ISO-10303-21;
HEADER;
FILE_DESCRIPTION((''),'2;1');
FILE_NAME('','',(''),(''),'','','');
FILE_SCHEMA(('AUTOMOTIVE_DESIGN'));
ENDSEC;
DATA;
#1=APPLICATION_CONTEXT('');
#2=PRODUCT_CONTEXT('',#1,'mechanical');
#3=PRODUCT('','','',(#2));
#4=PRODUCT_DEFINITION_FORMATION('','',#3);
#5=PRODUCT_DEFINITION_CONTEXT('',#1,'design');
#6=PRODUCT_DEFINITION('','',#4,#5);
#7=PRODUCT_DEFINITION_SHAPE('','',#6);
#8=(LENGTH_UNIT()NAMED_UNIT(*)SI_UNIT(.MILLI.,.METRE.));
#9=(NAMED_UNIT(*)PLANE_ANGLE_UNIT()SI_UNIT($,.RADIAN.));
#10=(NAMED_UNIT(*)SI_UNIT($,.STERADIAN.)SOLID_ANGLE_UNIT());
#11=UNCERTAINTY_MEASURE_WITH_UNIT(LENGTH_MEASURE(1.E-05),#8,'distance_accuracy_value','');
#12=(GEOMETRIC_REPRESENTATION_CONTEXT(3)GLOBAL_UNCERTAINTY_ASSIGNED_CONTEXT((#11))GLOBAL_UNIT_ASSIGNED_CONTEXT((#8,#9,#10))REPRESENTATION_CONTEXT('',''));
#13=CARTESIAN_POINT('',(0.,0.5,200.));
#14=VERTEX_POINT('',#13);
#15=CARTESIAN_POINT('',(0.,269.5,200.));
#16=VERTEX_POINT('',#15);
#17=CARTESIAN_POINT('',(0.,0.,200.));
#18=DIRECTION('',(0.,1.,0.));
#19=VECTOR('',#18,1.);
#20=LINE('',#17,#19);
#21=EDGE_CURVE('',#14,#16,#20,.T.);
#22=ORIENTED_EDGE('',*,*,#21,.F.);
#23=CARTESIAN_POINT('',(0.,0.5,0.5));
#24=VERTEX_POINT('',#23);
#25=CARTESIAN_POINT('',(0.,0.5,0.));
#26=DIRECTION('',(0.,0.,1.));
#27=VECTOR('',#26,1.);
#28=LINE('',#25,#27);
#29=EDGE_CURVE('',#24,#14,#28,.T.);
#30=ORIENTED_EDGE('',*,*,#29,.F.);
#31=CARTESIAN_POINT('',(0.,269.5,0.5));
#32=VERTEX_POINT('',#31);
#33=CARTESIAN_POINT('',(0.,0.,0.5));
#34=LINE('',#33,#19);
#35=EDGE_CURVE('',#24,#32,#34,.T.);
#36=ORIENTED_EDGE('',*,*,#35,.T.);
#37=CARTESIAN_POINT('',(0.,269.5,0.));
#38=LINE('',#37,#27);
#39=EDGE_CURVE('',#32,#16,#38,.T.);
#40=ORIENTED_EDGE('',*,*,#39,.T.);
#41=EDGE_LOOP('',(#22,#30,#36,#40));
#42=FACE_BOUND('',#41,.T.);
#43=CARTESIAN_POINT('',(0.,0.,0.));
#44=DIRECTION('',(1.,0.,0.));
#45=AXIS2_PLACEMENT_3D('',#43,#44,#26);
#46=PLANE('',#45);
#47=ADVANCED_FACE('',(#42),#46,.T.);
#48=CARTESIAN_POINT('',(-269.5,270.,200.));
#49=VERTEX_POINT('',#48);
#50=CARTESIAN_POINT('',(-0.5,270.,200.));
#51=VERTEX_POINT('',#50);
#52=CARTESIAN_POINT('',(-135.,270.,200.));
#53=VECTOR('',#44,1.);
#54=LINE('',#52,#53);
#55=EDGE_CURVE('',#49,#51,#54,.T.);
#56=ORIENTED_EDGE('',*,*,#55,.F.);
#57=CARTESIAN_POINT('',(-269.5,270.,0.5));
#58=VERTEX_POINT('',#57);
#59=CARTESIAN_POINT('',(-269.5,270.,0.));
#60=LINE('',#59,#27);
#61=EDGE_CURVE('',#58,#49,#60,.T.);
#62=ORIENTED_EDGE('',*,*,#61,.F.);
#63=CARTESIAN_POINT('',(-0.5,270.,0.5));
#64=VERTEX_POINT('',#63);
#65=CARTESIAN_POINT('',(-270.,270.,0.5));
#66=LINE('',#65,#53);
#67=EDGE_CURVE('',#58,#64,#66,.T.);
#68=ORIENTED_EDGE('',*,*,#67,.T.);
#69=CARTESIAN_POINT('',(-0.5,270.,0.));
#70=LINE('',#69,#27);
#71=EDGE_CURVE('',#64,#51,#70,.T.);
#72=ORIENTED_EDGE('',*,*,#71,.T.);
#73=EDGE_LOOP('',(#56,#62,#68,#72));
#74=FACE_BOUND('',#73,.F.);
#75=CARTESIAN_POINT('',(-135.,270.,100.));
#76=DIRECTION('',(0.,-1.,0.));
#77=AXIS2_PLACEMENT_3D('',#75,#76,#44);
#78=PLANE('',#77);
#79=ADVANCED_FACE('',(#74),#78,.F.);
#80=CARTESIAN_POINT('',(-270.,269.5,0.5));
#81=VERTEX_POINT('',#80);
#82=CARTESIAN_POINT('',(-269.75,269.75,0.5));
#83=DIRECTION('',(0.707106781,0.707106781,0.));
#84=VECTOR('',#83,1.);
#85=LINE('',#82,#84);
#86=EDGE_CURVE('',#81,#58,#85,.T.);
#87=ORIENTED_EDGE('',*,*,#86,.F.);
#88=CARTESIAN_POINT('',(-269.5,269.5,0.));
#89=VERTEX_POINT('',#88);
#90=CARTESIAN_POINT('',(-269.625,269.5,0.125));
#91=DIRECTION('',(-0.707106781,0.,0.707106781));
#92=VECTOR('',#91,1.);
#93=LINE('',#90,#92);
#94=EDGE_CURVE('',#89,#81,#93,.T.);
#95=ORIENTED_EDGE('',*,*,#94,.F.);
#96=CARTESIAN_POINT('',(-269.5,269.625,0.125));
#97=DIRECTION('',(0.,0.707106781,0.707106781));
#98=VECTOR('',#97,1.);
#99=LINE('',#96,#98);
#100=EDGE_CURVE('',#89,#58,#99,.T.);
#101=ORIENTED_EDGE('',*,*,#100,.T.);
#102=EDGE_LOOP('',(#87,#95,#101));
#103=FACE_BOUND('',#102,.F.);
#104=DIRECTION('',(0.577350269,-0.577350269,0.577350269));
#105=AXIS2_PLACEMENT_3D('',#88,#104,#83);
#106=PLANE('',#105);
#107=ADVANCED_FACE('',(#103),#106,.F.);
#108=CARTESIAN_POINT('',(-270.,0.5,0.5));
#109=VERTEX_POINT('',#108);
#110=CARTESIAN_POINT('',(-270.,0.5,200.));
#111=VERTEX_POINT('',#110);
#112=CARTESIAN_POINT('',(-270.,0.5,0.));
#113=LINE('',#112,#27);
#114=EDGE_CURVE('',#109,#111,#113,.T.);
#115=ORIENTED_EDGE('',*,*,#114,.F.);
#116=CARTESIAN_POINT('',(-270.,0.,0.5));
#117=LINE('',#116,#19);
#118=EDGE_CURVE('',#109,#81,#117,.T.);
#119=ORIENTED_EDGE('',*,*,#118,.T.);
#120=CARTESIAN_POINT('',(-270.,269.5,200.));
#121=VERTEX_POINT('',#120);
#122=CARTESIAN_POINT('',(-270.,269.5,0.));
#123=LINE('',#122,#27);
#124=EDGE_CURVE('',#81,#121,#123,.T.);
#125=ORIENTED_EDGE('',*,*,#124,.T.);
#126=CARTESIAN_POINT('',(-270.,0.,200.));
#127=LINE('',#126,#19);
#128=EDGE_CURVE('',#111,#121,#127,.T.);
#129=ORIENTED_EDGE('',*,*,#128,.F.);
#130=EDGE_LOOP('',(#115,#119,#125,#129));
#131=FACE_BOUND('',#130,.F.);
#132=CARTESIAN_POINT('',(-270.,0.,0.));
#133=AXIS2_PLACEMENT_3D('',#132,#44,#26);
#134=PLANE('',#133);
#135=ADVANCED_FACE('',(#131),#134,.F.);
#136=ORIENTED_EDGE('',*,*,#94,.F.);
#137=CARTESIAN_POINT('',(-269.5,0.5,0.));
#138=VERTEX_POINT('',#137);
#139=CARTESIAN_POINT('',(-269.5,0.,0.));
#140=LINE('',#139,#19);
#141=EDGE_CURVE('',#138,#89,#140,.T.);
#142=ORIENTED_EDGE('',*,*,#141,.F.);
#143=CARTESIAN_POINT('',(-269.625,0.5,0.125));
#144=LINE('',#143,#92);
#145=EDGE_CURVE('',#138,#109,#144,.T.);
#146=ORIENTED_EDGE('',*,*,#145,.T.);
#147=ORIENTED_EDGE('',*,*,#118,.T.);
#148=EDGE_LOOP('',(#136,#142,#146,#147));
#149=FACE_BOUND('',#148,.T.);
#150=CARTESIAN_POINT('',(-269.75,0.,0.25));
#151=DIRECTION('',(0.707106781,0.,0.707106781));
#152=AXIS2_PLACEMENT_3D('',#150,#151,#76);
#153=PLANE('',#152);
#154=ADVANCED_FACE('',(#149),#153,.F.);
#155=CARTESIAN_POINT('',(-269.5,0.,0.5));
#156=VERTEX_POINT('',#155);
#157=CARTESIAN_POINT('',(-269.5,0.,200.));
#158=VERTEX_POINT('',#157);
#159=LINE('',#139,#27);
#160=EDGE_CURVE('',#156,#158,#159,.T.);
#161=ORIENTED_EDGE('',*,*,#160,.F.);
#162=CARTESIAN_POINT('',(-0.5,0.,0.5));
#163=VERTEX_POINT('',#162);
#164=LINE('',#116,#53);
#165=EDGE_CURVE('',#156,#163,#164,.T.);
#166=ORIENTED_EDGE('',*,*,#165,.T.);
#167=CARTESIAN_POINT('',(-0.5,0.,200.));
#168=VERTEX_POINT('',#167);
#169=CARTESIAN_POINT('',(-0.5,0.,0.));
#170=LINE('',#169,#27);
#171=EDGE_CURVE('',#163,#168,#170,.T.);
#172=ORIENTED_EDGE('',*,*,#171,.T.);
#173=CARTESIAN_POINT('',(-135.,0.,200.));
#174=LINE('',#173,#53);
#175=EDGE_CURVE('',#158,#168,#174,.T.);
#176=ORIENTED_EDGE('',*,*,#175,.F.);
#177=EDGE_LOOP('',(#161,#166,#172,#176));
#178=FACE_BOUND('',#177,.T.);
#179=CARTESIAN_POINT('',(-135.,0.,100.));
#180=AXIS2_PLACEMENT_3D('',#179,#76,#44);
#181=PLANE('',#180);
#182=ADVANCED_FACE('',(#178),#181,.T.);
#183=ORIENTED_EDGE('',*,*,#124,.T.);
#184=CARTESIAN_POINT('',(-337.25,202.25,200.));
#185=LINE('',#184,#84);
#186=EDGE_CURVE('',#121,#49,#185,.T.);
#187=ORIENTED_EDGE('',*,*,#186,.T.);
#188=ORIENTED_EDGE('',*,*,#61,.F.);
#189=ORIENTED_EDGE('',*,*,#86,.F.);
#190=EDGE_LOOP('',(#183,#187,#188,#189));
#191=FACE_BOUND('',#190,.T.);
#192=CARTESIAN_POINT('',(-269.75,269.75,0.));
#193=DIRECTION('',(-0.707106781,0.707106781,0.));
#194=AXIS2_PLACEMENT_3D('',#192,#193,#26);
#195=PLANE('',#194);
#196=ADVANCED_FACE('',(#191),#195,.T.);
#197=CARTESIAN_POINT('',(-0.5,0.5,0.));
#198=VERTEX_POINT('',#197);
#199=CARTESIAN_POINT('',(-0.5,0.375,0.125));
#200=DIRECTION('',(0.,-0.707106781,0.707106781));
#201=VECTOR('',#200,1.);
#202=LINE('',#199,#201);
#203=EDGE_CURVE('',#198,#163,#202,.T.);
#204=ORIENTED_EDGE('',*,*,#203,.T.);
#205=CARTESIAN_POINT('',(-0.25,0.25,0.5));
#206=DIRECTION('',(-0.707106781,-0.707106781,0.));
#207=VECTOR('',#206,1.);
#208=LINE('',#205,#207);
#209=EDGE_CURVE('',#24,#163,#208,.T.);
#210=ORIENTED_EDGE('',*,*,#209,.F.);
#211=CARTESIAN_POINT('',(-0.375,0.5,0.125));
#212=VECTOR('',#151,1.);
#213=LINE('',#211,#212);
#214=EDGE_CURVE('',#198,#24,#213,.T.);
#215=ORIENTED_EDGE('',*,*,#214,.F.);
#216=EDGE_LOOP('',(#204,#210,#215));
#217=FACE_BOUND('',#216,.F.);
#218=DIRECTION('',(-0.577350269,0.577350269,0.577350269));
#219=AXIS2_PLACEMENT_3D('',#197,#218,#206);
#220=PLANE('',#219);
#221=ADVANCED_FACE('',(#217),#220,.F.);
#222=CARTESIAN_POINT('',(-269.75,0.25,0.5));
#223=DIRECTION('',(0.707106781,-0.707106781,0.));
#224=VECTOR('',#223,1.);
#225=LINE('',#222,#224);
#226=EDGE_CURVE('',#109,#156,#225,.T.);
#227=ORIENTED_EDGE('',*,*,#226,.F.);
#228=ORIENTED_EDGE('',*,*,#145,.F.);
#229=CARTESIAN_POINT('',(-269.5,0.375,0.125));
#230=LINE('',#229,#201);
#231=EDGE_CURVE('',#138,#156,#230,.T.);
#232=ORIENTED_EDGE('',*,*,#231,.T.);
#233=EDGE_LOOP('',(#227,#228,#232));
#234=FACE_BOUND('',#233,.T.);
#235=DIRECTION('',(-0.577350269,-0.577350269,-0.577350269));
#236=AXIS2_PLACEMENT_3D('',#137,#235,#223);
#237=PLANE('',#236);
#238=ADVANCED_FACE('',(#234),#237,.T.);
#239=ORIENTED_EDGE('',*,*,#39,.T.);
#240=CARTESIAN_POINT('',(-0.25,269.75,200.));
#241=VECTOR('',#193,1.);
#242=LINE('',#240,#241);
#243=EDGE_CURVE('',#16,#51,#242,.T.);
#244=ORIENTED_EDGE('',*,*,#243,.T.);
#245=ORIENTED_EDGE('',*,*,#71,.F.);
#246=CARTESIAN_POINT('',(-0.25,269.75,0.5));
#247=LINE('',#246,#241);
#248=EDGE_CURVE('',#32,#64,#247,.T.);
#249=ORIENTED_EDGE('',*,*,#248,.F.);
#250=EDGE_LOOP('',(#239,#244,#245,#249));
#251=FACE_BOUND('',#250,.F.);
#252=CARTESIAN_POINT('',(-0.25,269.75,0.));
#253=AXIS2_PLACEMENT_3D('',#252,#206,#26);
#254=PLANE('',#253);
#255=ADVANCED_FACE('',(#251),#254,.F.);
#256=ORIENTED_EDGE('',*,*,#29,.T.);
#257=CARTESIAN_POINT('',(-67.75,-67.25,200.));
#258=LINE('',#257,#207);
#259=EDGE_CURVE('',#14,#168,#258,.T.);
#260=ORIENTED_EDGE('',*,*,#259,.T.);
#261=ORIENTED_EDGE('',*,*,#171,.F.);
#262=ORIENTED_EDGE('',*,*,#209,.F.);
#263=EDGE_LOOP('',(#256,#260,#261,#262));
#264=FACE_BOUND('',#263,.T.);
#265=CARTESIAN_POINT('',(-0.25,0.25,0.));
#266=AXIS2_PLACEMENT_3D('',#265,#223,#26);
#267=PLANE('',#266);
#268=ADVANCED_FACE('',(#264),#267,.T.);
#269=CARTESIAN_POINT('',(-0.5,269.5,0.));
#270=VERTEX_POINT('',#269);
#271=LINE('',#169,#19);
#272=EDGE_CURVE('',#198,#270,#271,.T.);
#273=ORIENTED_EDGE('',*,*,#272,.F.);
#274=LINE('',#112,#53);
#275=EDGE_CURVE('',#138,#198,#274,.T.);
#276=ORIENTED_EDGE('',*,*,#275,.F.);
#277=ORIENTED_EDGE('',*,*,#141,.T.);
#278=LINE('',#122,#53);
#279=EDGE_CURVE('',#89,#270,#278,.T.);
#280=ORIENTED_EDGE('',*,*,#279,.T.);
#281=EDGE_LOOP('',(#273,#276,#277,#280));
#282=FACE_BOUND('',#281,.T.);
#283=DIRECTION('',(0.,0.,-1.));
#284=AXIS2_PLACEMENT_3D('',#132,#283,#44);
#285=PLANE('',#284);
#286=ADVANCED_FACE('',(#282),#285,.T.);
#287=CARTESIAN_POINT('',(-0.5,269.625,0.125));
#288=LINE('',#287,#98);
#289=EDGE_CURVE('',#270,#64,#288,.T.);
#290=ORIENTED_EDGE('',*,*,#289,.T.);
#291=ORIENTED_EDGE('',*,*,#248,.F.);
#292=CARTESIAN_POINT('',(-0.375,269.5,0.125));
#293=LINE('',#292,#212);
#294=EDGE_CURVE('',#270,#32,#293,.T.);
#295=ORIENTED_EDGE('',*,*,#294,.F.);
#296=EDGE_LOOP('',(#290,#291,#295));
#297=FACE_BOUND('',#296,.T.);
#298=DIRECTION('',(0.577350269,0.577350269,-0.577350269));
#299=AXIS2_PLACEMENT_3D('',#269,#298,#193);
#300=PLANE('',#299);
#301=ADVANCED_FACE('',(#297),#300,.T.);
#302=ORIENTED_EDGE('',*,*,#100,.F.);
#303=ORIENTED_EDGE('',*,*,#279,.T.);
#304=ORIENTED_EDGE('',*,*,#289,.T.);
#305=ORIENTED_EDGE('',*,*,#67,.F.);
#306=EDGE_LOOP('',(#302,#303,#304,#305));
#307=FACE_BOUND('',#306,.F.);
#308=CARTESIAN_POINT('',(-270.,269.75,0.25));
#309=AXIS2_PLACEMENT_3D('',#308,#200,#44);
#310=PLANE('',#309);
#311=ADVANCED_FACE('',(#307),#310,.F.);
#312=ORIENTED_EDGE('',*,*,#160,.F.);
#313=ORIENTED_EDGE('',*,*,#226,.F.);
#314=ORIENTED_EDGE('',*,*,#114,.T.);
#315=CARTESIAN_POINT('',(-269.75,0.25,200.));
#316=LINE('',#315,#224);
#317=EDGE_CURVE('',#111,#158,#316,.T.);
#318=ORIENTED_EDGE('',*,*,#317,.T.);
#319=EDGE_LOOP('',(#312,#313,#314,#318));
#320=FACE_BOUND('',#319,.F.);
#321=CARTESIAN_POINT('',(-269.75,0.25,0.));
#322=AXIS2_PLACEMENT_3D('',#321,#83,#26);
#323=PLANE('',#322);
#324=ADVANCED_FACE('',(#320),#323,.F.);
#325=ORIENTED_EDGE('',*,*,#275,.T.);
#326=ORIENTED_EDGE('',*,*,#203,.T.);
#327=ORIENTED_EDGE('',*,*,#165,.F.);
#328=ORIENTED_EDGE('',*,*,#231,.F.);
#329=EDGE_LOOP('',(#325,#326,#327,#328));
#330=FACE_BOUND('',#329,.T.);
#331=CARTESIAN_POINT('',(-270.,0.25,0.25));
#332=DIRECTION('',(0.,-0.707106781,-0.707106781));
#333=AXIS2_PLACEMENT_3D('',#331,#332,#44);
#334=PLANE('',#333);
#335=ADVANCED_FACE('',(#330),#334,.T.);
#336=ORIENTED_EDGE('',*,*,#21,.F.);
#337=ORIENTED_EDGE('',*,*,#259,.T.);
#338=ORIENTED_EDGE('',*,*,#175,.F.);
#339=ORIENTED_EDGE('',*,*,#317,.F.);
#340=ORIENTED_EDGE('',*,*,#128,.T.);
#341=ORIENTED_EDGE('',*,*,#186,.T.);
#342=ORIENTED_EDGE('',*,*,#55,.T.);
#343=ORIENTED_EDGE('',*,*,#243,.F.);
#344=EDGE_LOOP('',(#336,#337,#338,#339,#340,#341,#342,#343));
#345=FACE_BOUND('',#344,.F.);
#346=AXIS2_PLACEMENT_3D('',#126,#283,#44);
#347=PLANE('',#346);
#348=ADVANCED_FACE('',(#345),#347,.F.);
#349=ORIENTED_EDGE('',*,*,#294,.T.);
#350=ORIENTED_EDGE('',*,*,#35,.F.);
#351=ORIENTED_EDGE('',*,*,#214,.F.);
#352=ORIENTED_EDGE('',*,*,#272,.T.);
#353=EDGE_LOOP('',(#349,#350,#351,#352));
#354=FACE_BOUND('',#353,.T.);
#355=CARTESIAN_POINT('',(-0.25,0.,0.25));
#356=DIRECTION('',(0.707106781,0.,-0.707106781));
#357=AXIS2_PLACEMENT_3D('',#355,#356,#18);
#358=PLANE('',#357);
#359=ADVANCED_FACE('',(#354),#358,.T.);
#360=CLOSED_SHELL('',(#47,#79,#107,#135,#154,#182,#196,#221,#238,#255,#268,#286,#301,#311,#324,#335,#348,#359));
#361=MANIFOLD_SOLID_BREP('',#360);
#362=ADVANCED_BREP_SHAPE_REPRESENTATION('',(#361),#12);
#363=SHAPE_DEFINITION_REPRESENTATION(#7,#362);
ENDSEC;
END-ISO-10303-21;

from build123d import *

# Parameters (mm, degrees)
F0_W     = 270
F0_H     = 200
F1_DEPTH = 270
F2_SIZE  = 0.5


with BuildPart() as f1:
    # F0 (on Front) → F1 (new body)
    with BuildSketch(Plane.XZ):
        with Locations((-135, 100)):
            Rectangle(F0_W, F0_H)
    extrude(amount=-F1_DEPTH)

    # F2
    f2_edges = [f1.edges().sort_by_distance(p)[0] for p in [
        (0, 0, 100),
        (0, 270, 100),
        (-270, 0, 100),
        (-270, 270, 100),
        (-270, 135, 0),
        (0, 135, 0),
        (-135, 0, 0),
        (-135, 270, 0),
    ]]
    chamfer(f2_edges, length=F2_SIZE)


solid = f1.part
